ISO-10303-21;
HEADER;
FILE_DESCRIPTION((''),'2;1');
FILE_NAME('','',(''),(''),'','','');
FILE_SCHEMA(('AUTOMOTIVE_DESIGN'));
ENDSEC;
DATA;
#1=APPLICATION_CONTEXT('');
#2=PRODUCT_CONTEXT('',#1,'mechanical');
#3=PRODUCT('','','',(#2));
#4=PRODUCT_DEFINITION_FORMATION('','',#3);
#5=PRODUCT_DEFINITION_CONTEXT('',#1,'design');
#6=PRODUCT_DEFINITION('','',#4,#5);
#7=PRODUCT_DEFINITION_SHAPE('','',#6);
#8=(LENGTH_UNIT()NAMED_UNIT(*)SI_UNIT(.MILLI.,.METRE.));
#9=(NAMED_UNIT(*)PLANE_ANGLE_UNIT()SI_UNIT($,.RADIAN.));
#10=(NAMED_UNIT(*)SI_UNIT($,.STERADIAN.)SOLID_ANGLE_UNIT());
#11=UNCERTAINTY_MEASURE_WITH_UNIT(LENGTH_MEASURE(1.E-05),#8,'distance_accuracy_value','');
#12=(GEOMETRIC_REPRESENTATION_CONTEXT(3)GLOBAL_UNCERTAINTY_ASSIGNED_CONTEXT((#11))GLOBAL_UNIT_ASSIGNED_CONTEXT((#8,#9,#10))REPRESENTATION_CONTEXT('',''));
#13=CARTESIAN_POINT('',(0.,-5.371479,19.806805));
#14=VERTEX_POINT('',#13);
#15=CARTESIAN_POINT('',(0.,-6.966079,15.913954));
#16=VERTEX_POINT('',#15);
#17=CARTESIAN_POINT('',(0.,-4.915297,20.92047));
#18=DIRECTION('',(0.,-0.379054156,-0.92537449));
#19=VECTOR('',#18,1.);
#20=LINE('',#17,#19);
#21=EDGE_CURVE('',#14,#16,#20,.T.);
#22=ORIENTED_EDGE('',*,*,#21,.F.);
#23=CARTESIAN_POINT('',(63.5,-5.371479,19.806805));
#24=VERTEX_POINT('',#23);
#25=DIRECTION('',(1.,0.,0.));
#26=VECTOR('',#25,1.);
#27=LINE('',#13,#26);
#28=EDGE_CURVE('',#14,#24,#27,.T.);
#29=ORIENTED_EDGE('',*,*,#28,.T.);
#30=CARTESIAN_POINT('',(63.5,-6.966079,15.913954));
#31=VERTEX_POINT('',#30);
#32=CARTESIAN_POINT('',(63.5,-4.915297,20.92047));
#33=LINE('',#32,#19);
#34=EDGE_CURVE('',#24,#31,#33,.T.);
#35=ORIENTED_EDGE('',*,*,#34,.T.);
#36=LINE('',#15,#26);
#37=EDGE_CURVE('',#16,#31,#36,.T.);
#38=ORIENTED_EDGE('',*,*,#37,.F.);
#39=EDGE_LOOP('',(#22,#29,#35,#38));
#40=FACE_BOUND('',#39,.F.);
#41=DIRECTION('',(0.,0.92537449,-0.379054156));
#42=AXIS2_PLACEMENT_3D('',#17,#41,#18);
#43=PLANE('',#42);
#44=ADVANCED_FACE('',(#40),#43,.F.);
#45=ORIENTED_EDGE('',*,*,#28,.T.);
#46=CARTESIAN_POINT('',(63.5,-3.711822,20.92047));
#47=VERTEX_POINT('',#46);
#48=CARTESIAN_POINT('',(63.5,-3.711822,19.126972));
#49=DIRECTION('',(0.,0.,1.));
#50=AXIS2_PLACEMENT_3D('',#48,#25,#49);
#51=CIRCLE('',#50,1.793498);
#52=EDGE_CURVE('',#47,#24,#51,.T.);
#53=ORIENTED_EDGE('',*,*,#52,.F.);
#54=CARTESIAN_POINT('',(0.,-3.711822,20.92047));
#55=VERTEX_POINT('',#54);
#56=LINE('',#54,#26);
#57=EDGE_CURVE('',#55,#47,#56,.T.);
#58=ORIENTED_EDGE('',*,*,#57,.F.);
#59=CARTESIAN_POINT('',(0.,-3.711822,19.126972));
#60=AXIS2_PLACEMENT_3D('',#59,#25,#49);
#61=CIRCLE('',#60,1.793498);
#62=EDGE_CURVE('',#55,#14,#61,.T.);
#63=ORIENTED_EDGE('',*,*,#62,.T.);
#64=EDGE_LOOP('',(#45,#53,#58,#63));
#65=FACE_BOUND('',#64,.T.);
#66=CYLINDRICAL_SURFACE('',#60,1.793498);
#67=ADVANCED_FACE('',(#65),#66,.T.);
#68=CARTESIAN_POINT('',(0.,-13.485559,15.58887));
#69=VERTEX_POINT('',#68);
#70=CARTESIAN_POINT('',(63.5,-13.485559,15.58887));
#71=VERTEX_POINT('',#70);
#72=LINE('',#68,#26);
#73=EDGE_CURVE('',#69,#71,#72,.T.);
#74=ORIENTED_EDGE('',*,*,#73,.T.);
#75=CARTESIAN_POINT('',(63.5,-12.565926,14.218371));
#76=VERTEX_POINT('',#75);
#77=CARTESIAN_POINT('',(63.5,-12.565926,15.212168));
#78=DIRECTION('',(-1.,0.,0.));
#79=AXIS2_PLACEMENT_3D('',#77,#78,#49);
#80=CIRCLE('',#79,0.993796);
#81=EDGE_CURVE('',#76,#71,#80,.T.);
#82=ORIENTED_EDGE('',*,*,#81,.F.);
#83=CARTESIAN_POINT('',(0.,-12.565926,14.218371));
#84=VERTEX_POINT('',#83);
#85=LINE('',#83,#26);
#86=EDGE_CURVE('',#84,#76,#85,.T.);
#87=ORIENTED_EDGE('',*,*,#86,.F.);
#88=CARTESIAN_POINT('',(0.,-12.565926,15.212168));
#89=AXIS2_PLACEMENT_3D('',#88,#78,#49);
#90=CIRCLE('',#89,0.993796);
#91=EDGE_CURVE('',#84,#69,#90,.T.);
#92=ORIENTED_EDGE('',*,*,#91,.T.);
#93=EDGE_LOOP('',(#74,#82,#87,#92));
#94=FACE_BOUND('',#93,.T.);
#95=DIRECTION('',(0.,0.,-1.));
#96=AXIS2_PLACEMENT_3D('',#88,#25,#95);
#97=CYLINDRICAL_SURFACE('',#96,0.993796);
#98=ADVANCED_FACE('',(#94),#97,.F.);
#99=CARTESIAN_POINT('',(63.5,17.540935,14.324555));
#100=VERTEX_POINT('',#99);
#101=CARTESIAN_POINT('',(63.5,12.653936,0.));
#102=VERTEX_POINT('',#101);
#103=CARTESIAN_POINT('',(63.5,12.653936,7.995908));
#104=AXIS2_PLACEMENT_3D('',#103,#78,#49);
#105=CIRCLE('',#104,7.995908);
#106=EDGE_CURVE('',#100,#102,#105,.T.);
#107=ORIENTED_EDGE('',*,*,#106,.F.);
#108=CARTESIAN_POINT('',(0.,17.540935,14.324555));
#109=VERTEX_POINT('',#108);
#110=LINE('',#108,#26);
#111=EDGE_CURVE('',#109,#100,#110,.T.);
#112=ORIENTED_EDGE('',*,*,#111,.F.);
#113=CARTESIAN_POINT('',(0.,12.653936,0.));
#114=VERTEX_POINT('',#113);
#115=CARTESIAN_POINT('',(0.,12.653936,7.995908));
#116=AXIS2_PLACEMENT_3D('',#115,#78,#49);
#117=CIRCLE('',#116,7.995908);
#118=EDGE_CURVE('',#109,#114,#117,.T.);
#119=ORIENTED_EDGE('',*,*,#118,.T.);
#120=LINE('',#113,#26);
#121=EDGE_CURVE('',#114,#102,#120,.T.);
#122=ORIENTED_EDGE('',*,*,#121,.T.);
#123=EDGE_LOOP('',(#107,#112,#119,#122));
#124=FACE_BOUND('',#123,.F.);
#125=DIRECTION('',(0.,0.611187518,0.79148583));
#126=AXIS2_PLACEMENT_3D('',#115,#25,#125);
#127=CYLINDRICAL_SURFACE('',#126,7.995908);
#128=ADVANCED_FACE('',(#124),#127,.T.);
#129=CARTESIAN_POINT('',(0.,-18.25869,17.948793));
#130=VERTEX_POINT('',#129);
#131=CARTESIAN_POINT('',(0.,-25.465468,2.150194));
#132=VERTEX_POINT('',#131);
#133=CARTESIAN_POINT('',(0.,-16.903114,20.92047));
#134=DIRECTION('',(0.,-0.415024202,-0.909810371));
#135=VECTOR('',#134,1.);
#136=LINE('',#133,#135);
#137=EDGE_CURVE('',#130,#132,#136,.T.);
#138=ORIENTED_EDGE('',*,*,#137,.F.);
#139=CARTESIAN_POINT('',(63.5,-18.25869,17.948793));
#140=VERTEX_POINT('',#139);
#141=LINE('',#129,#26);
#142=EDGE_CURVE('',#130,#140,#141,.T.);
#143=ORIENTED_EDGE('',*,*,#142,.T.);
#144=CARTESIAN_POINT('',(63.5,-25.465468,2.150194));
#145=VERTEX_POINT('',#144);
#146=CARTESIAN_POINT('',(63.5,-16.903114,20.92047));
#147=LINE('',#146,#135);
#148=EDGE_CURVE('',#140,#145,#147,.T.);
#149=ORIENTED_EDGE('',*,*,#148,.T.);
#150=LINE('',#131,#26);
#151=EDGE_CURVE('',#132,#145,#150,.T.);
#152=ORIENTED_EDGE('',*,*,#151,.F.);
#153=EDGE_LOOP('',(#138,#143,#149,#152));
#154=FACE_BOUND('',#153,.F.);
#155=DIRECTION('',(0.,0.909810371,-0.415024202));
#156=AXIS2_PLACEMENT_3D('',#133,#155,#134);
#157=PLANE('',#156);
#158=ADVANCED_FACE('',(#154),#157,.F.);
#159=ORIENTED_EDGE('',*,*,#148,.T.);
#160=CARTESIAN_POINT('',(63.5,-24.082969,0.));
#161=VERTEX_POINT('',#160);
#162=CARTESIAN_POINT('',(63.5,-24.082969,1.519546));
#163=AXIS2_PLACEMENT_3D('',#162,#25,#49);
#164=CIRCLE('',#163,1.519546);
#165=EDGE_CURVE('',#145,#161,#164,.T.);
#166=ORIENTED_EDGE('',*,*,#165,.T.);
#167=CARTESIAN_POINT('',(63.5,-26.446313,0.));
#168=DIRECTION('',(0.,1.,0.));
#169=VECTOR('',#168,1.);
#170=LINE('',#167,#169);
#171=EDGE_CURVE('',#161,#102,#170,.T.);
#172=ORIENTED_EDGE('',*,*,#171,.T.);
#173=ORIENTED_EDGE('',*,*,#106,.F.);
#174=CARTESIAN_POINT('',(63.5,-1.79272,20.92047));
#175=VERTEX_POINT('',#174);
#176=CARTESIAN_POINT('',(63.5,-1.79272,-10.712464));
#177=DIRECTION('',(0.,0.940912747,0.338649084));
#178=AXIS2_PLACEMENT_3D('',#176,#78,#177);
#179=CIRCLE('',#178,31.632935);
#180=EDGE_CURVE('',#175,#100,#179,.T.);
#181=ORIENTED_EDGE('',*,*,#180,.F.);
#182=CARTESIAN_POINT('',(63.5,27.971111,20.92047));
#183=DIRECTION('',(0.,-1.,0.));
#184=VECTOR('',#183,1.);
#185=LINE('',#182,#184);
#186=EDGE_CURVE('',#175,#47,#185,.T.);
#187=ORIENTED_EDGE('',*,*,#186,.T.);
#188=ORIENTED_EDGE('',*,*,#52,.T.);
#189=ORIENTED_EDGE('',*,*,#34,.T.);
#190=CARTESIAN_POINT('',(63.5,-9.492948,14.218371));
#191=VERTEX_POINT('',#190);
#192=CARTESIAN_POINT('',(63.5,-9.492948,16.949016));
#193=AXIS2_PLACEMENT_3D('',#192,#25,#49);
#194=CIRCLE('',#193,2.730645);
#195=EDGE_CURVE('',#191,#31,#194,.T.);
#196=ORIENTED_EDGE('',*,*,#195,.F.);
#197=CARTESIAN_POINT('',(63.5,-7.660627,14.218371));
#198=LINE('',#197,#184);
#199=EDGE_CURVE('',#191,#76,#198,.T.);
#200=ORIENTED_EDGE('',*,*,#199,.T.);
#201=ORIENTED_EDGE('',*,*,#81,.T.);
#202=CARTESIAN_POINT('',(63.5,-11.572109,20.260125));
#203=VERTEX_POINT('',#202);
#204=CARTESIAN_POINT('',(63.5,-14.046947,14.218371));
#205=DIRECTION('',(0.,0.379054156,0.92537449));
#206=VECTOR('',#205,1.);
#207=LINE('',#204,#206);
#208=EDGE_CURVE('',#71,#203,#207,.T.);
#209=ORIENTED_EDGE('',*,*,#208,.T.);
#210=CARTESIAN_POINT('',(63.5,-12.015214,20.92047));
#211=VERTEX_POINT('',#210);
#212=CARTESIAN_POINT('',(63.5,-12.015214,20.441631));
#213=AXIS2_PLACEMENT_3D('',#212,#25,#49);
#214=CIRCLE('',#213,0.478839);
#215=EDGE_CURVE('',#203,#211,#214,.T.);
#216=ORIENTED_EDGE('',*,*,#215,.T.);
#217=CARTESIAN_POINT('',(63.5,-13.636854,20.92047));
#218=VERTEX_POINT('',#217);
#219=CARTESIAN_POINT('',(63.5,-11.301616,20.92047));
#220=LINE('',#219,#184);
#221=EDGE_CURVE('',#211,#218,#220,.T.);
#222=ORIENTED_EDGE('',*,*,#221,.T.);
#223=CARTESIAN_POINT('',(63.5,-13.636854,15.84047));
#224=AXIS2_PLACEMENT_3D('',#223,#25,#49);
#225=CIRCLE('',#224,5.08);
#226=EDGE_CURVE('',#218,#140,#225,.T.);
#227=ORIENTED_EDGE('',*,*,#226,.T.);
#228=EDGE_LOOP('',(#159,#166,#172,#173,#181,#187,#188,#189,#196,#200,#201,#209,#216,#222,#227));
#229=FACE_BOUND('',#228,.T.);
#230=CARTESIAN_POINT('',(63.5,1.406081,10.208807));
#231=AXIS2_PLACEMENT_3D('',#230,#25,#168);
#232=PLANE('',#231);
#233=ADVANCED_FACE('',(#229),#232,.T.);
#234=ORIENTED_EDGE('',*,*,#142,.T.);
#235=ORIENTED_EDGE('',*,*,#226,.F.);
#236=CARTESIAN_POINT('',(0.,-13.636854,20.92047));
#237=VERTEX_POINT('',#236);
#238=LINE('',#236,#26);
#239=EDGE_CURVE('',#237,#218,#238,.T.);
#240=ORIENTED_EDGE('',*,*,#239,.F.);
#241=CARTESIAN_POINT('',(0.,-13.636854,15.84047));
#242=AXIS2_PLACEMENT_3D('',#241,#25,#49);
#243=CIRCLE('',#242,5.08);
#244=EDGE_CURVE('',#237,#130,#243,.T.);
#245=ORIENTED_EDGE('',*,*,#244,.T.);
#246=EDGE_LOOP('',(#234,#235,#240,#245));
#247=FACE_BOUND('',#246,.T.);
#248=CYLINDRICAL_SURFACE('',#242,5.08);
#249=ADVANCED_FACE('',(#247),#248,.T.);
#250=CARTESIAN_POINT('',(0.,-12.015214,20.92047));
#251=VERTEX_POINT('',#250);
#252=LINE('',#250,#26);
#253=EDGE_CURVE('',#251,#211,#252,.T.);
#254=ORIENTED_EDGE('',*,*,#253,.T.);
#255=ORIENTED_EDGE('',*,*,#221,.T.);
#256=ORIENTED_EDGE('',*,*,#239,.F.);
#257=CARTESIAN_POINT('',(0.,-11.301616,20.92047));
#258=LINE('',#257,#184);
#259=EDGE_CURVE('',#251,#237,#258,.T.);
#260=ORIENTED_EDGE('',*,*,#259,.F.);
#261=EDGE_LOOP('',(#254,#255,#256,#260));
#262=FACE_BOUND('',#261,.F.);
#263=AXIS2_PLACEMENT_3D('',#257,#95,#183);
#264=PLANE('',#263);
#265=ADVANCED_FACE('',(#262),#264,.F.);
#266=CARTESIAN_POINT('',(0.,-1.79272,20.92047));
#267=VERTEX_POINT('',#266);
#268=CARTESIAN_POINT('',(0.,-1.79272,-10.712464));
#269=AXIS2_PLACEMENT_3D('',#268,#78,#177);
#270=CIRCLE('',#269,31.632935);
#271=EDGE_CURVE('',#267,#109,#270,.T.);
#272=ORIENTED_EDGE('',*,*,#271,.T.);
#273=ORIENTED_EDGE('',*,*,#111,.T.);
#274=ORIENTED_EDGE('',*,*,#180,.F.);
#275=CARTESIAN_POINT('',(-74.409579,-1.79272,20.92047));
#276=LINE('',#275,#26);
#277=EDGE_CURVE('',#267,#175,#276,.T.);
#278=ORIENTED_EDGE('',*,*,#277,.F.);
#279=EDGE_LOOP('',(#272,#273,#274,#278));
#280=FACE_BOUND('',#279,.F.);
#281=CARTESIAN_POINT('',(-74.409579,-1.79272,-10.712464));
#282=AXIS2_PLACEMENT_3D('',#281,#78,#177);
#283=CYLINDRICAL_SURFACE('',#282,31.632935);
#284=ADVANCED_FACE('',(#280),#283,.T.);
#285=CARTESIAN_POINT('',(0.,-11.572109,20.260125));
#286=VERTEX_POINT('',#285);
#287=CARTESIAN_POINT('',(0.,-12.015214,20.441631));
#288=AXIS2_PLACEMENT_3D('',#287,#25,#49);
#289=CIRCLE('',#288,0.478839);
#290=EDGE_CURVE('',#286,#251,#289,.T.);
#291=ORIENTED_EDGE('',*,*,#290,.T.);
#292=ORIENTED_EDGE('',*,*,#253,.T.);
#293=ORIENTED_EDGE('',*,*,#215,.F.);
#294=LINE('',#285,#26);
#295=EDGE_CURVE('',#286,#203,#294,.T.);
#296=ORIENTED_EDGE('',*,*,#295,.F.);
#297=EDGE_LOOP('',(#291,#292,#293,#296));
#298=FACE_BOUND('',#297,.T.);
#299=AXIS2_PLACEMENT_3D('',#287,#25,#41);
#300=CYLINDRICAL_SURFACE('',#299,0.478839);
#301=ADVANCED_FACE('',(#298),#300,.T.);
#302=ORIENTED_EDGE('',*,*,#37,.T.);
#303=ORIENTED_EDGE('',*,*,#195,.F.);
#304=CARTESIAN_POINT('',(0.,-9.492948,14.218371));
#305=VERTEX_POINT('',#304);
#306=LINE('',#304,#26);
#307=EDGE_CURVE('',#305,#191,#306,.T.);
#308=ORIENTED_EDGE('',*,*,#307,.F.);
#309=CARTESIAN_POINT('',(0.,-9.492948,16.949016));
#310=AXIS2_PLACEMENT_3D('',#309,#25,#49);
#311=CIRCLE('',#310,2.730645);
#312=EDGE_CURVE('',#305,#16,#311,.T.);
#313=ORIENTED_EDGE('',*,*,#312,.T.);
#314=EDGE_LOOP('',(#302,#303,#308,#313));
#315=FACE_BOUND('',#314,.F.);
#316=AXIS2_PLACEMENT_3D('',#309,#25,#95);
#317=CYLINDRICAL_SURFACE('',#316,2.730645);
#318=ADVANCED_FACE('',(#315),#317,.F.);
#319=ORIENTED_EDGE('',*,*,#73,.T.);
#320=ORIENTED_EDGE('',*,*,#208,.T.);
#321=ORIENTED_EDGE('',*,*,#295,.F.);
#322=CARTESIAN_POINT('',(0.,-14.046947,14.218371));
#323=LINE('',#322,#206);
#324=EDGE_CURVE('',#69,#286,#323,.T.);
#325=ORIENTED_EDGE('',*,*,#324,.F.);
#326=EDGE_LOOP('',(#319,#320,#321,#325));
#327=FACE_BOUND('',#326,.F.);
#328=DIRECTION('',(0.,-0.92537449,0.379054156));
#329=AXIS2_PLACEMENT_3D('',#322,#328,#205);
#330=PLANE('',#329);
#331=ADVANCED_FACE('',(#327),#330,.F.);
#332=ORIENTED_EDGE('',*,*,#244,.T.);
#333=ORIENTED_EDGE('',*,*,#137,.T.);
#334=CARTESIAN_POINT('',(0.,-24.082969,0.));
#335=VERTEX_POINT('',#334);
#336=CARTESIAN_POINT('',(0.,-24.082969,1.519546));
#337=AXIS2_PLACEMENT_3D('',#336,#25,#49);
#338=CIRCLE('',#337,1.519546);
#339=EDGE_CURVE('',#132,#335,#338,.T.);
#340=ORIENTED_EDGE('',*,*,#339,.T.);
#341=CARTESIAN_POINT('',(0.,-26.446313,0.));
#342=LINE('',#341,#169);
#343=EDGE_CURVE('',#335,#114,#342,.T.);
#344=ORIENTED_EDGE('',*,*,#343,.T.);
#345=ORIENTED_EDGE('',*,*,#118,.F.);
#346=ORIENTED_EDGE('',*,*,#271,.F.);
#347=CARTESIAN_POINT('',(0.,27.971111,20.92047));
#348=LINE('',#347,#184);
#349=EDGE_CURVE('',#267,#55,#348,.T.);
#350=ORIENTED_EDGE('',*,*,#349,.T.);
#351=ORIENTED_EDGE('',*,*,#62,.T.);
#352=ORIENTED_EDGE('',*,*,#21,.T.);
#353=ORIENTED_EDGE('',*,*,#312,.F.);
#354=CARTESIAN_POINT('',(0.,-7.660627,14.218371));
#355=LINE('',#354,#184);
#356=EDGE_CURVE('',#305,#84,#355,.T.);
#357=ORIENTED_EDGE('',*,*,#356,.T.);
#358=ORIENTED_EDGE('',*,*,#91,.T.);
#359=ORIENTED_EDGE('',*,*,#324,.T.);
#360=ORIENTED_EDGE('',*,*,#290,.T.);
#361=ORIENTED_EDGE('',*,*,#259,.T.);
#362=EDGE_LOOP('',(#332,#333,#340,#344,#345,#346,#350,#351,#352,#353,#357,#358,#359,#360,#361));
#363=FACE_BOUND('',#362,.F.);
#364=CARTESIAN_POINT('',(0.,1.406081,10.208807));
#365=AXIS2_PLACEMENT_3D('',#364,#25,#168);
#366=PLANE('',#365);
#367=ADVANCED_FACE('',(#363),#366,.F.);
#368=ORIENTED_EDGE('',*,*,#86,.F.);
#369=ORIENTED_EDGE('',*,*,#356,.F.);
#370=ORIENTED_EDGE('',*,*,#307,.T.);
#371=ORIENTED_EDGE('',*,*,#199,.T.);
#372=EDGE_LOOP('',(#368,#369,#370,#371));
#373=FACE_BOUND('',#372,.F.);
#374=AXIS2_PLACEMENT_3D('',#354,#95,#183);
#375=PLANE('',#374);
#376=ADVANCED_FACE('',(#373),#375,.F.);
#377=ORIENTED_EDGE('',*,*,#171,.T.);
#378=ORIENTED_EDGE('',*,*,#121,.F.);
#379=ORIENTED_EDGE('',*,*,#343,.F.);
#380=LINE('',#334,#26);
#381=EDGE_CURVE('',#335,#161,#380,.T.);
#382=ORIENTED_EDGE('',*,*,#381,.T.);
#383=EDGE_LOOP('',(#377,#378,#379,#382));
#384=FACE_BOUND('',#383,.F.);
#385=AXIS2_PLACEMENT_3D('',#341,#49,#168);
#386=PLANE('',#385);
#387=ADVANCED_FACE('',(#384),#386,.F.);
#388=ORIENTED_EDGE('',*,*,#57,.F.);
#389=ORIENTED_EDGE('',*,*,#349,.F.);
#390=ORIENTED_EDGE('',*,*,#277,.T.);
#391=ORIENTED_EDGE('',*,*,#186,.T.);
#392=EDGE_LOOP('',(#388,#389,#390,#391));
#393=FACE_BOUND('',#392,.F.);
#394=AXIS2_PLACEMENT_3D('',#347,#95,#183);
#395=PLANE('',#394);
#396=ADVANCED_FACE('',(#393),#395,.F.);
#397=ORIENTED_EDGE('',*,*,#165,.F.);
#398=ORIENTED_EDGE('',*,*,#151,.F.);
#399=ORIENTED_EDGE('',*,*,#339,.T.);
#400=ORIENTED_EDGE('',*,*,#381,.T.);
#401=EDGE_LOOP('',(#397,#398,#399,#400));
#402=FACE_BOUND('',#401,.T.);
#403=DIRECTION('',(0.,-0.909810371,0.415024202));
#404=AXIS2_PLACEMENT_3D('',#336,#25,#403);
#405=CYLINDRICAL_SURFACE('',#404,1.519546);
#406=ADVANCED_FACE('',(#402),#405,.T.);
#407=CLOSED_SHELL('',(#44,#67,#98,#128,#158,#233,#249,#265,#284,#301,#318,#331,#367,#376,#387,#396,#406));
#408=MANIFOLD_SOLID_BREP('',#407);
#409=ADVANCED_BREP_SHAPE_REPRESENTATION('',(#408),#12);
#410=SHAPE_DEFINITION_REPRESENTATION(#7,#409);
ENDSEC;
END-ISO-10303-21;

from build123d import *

# Parameters (mm, degrees)
F1_DEPTH    = 63.5
F2_R        = 1.7934980513
F3_R        = 0.4788394015
F4_R        = 2.7306448225
F5_R        = 0.9937962324
F6_R        = 5.08
F7_R        = 1.519546052
F8_T1_DEPTH = 212.3191575165
F9_R        = 7.9959076321


# Not quite as in the source:
# - a fillet or chamfer that OpenCascade refuses, or shapes differently, is made with other operations: its cross-section is extruded or revolved along the edge and cut away or added


with BuildPart() as f1:
    # F0 (on Right) → F1 (new body)
    with BuildSketch(Plane.YZ):
        Polygon((-16.9031135738, 20.9204703569), (-26.4463126659, 0), (27.971111238, 0), (27.971111238, 20.9204703569), (-4.9152970314, 20.9204703569), (-7.6606271703, 14.2183713615), (-14.0469465405, 14.2183713615), (-11.3016164016, 20.9204703569), align=None)
    extrude(amount=F1_DEPTH)

    # F2
    f2_edges = [f1.edges().sort_by_distance(p)[0] for p in [
        (31.75, -4.915297, 20.92047),
    ]]
    fillet(f2_edges, radius=F2_R)

    # F3
    f3_edges = [f1.edges().sort_by_distance(p)[0] for p in [
        (31.75, -11.301616, 20.92047),
    ]]
    fillet(f3_edges, radius=F3_R)

    # F4
    f4_edges = [f1.edges().sort_by_distance(p)[0] for p in [
        (31.75, -7.660627, 14.218371),
    ]]
    fillet(f4_edges, radius=F4_R)

    # F5
    f5_edges = [f1.edges().sort_by_distance(p)[0] for p in [
        (31.75, -14.046947, 14.218371),
    ]]
    fillet(f5_edges, radius=F5_R)

    # F6
    f6_edges = [f1.edges().sort_by_distance(p)[0] for p in [
        (31.75, -16.903114, 20.92047),
    ]]
    fillet(f6_edges, radius=F6_R)

    # F7
    f7_edges = [f1.edges().sort_by_distance(p)[0] for p in [
        (31.75, -26.446313, 0),
    ]]
    fillet(f7_edges, radius=F7_R)

    # F8: fillet of radius 31.6329347077 on 1 edges, made by hand

    # F8_s2 → F8_t1 (cut)
    with BuildSketch(Plane.YZ.offset(-74.4095787583)):
        with BuildLine():
            ThreePointArc((27.971111238, 0), (16.3976050872, 15.1671535327), (-1.7927202653, 20.9204703569))
            Line((-1.7927202653, 20.9204703569), (27.971111238, 20.9204703569))
            Line((27.971111238, 20.9204703569), (27.971111238, 0))
        make_face()
    extrude(amount=F8_T1_DEPTH, mode=Mode.SUBTRACT)

    # F9
    f9_edges = [f1.edges().sort_by_distance(p)[0] for p in [
        (31.75, 27.971111, 0),
    ]]
    fillet(f9_edges, radius=F9_R)


solid = f1.part
